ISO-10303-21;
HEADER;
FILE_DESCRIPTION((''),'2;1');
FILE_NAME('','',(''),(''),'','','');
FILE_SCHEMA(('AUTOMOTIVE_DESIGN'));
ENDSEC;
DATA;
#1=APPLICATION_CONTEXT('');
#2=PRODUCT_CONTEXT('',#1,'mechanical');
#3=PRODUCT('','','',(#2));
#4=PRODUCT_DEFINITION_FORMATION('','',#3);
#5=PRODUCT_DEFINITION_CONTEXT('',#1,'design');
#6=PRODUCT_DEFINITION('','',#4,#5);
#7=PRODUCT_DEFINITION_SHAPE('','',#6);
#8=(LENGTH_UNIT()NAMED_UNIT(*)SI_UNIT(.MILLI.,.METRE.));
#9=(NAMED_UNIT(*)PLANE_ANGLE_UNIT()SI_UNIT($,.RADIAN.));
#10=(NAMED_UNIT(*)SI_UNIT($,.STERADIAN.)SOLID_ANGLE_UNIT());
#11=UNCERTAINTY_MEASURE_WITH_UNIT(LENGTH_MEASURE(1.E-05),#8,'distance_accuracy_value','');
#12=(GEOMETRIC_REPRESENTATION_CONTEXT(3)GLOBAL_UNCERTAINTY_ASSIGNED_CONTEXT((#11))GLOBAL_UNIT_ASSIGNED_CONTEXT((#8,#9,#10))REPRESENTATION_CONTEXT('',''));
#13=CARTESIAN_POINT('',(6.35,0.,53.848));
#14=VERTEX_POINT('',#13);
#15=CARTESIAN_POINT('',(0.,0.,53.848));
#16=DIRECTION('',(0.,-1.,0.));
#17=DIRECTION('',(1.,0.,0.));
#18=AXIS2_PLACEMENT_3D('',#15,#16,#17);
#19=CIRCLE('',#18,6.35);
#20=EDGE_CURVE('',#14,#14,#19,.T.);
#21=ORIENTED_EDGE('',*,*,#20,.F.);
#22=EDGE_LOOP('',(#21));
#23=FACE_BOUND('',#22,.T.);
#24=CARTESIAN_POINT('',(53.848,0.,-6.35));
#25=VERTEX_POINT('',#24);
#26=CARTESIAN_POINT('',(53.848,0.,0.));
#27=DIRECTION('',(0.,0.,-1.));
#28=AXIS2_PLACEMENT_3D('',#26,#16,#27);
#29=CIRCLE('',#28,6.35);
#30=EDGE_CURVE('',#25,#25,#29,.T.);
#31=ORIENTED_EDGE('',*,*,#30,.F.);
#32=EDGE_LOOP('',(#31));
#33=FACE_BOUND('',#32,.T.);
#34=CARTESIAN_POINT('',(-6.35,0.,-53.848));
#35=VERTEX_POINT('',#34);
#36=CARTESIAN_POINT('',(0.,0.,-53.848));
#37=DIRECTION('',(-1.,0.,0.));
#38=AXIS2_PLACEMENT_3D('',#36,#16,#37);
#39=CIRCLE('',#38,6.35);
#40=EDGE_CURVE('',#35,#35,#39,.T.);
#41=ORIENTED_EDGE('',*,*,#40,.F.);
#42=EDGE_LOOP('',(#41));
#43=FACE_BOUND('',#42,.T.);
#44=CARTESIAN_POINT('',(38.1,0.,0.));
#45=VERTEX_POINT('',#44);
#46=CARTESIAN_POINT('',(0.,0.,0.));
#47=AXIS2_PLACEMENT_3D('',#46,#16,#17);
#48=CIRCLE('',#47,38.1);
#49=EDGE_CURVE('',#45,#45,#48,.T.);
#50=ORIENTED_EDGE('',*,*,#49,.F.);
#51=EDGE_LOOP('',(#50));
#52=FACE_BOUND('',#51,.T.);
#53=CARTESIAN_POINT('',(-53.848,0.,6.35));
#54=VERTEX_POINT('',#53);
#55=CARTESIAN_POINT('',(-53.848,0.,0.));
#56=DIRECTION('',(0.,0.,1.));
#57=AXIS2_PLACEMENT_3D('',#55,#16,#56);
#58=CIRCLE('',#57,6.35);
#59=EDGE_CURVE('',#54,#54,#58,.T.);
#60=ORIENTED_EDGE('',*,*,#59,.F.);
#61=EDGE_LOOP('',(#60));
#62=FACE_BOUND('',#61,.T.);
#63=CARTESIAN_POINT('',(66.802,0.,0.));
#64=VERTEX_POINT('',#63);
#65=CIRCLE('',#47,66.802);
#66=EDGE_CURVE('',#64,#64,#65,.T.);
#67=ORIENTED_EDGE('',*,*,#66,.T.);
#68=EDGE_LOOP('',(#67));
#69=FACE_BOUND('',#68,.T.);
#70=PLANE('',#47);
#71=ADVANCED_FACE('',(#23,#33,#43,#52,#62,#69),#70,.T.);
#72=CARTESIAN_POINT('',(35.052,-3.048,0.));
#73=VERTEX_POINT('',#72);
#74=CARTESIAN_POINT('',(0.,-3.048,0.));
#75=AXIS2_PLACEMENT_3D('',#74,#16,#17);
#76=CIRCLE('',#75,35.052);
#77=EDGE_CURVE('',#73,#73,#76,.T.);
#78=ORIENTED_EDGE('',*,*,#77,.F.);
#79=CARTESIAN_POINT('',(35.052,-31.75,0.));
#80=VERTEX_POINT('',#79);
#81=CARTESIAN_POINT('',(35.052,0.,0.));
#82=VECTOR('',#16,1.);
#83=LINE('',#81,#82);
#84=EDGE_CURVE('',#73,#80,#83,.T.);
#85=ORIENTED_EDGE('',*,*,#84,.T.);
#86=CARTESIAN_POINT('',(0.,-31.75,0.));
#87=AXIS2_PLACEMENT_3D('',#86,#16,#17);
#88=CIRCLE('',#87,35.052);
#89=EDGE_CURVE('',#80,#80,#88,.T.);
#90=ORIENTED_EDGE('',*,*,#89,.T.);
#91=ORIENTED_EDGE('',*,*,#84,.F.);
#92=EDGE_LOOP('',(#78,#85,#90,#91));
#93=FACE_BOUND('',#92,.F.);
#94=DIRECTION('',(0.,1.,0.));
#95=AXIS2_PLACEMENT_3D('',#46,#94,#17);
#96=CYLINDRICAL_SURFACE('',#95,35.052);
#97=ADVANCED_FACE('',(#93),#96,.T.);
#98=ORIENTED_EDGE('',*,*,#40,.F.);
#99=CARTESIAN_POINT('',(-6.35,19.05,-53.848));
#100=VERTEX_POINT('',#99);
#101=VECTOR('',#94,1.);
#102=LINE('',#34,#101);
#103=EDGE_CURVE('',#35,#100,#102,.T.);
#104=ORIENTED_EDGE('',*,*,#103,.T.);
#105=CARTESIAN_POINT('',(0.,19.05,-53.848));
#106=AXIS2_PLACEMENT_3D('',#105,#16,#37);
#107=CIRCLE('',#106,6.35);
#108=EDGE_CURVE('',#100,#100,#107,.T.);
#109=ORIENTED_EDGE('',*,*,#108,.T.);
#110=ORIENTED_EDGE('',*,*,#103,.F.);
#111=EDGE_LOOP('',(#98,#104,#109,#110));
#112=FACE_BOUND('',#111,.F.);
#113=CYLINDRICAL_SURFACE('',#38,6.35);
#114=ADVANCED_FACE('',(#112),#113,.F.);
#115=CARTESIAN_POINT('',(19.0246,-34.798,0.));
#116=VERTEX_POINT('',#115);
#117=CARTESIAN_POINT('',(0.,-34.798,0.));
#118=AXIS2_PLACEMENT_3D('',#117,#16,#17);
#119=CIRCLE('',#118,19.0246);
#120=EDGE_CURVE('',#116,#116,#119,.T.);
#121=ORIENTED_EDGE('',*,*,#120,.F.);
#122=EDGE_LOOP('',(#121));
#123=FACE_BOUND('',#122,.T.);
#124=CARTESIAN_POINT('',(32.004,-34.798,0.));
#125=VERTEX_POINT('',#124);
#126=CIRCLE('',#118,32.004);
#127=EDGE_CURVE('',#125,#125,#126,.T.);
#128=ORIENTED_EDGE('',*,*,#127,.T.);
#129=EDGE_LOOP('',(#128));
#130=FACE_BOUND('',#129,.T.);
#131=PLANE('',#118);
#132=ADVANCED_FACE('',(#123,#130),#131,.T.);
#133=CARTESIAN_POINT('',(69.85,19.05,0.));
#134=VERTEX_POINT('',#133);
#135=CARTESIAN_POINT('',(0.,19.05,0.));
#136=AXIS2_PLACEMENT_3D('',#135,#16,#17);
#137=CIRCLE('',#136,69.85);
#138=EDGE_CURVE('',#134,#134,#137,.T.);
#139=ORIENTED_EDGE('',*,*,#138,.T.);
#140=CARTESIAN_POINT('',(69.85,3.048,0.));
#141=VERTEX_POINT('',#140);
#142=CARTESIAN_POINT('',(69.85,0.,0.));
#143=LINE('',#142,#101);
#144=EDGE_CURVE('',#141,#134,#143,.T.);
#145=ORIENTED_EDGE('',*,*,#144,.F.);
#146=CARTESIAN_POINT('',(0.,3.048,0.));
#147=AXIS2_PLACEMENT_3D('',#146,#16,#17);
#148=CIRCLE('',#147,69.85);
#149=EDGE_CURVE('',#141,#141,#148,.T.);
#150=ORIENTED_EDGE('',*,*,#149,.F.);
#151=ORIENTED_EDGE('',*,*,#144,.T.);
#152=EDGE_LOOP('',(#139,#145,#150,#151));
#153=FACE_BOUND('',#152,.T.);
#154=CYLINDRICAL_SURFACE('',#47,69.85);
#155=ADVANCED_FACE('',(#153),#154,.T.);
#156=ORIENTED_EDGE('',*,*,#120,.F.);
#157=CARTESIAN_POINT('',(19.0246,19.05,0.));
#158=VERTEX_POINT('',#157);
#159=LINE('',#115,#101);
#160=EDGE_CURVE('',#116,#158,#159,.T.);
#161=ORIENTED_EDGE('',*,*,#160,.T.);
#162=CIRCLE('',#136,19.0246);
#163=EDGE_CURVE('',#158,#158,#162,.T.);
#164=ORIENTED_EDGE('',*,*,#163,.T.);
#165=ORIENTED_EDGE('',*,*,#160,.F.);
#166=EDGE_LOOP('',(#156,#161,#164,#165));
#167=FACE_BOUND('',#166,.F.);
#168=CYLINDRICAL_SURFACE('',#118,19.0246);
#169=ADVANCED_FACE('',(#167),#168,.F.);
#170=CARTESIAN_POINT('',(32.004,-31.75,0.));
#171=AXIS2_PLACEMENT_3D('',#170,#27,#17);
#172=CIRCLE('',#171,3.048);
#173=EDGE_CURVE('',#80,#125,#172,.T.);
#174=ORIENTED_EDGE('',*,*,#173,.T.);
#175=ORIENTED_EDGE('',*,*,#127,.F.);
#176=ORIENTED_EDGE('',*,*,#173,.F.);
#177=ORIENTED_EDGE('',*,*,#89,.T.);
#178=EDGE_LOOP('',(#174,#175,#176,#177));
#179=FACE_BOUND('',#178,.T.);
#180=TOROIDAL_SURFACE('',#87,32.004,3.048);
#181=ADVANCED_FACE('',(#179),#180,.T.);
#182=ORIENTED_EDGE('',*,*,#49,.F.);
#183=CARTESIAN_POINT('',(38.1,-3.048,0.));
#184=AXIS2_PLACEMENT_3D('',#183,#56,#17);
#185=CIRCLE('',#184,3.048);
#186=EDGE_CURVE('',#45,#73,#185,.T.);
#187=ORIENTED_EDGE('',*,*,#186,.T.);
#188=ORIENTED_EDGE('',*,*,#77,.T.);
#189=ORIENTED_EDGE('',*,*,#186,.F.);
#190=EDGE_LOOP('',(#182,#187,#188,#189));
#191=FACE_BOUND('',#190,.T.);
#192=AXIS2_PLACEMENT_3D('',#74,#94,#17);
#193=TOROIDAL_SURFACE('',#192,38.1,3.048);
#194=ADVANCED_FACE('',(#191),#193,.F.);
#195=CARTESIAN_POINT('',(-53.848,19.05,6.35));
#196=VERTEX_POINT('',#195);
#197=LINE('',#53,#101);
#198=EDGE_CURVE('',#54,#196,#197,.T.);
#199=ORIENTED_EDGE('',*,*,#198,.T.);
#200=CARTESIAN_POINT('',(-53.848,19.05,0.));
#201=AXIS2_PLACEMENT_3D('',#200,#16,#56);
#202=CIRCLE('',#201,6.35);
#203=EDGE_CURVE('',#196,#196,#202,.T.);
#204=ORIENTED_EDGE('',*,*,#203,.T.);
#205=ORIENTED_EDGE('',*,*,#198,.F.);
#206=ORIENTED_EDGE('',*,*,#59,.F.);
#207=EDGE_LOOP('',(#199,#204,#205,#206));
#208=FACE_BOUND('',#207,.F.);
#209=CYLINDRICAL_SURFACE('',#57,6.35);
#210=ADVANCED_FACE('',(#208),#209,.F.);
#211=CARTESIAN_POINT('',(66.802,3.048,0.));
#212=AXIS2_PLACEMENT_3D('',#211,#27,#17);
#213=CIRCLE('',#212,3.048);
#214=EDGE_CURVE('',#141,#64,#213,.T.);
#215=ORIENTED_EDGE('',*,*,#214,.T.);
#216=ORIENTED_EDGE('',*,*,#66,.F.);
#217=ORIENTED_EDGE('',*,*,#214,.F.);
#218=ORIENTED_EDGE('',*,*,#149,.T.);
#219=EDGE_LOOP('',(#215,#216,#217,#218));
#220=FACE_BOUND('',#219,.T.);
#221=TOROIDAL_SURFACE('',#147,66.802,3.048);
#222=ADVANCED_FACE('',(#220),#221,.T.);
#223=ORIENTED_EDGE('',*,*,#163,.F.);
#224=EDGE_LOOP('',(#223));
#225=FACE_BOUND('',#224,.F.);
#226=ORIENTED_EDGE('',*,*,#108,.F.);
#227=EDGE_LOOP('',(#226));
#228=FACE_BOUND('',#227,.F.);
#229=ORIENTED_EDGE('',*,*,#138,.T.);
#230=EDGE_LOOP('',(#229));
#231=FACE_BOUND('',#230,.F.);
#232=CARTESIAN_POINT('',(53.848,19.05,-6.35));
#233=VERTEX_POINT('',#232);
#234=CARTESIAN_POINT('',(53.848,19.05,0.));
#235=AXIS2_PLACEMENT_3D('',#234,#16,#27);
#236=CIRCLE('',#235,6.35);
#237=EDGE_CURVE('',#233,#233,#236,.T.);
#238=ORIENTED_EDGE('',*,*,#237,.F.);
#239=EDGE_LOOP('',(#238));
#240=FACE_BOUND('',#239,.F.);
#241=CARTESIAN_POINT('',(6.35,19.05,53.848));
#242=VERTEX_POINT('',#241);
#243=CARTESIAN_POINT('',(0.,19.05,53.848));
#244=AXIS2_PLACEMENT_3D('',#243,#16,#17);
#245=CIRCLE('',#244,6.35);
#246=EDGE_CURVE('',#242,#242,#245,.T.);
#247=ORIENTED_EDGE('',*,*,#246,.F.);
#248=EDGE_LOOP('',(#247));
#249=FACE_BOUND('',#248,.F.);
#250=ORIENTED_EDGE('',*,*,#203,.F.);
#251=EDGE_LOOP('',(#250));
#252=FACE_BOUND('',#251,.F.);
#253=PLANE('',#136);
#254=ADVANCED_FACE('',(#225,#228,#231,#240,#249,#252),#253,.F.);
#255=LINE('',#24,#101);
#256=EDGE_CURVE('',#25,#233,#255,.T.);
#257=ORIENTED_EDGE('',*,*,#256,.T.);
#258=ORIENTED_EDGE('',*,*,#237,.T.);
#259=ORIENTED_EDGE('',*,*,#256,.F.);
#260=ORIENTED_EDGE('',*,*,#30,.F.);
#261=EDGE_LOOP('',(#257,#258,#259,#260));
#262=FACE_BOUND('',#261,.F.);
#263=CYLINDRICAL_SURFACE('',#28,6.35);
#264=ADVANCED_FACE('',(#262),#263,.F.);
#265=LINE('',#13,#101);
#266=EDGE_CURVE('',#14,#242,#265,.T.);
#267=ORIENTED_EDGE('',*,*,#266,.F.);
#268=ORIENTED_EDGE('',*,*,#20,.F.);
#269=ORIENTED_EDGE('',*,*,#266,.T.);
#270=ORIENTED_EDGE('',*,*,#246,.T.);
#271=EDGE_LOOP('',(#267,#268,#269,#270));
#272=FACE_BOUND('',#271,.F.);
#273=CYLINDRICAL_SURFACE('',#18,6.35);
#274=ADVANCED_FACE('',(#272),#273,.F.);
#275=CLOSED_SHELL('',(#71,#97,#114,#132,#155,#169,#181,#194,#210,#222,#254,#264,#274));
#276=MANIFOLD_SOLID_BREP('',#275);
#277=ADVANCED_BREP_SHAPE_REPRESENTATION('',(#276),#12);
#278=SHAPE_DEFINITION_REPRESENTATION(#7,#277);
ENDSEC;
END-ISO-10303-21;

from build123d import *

# Parameters (mm, degrees)
F0_R            = 69.85
F1_DEPTH        = 19.05
F2_R            = 35.052
F3_DEPTH        = 34.798
F4_R            = 19.0246
F5_DEPTH        = 53.849
F6_R            = 6.35
F7_DEPTH        = 19.051
F7_COPIES_COUNT = 4
F8_R            = 3.048


# Not quite as in the source:
# - a pattern or mirror of a feature is missing from the dataset's text; its kind, count and spacing are read off the source's solid


with BuildPart() as f1:
    # F0 (on Front) → F1 (new body)
    with BuildSketch(Plane.XZ):
        Circle(F0_R)
    extrude(amount=-F1_DEPTH)

    # F2 (on face) → F3 (join)
    with BuildSketch(Plane.XZ):
        Circle(F2_R)
    extrude(amount=F3_DEPTH)

    # F4 (on face) → F5 (cut, through all)
    with BuildSketch(Plane.XZ.offset(34.798)):
        Circle(F4_R)
    extrude(amount=-F5_DEPTH, mode=Mode.SUBTRACT)

    # F6 (on face) → F7 (cut, through all)
    with BuildSketch(Plane.XZ):
        with Locations((0, 53.848)):
            Circle(F6_R)
    f7 = extrude(amount=-F7_DEPTH, mode=Mode.SUBTRACT)

    # F7_copies: F7 ×4 about axis
    f7_copies_axis = Axis((0, 0, 0), (0, 1, 0))
    for i in range(1, F7_COPIES_COUNT):
        add(f7.rotate(f7_copies_axis, i * 360 / F7_COPIES_COUNT), mode=Mode.SUBTRACT)

    # F8
    f8_edges = [f1.edges().sort_by_distance(p)[0] for p in [
        (-35.052, -34.798, 0),
        (-35.052, 0, 0),
        (-69.85, 0, 0),
    ]]
    fillet(f8_edges, radius=F8_R)


solid = f1.part
